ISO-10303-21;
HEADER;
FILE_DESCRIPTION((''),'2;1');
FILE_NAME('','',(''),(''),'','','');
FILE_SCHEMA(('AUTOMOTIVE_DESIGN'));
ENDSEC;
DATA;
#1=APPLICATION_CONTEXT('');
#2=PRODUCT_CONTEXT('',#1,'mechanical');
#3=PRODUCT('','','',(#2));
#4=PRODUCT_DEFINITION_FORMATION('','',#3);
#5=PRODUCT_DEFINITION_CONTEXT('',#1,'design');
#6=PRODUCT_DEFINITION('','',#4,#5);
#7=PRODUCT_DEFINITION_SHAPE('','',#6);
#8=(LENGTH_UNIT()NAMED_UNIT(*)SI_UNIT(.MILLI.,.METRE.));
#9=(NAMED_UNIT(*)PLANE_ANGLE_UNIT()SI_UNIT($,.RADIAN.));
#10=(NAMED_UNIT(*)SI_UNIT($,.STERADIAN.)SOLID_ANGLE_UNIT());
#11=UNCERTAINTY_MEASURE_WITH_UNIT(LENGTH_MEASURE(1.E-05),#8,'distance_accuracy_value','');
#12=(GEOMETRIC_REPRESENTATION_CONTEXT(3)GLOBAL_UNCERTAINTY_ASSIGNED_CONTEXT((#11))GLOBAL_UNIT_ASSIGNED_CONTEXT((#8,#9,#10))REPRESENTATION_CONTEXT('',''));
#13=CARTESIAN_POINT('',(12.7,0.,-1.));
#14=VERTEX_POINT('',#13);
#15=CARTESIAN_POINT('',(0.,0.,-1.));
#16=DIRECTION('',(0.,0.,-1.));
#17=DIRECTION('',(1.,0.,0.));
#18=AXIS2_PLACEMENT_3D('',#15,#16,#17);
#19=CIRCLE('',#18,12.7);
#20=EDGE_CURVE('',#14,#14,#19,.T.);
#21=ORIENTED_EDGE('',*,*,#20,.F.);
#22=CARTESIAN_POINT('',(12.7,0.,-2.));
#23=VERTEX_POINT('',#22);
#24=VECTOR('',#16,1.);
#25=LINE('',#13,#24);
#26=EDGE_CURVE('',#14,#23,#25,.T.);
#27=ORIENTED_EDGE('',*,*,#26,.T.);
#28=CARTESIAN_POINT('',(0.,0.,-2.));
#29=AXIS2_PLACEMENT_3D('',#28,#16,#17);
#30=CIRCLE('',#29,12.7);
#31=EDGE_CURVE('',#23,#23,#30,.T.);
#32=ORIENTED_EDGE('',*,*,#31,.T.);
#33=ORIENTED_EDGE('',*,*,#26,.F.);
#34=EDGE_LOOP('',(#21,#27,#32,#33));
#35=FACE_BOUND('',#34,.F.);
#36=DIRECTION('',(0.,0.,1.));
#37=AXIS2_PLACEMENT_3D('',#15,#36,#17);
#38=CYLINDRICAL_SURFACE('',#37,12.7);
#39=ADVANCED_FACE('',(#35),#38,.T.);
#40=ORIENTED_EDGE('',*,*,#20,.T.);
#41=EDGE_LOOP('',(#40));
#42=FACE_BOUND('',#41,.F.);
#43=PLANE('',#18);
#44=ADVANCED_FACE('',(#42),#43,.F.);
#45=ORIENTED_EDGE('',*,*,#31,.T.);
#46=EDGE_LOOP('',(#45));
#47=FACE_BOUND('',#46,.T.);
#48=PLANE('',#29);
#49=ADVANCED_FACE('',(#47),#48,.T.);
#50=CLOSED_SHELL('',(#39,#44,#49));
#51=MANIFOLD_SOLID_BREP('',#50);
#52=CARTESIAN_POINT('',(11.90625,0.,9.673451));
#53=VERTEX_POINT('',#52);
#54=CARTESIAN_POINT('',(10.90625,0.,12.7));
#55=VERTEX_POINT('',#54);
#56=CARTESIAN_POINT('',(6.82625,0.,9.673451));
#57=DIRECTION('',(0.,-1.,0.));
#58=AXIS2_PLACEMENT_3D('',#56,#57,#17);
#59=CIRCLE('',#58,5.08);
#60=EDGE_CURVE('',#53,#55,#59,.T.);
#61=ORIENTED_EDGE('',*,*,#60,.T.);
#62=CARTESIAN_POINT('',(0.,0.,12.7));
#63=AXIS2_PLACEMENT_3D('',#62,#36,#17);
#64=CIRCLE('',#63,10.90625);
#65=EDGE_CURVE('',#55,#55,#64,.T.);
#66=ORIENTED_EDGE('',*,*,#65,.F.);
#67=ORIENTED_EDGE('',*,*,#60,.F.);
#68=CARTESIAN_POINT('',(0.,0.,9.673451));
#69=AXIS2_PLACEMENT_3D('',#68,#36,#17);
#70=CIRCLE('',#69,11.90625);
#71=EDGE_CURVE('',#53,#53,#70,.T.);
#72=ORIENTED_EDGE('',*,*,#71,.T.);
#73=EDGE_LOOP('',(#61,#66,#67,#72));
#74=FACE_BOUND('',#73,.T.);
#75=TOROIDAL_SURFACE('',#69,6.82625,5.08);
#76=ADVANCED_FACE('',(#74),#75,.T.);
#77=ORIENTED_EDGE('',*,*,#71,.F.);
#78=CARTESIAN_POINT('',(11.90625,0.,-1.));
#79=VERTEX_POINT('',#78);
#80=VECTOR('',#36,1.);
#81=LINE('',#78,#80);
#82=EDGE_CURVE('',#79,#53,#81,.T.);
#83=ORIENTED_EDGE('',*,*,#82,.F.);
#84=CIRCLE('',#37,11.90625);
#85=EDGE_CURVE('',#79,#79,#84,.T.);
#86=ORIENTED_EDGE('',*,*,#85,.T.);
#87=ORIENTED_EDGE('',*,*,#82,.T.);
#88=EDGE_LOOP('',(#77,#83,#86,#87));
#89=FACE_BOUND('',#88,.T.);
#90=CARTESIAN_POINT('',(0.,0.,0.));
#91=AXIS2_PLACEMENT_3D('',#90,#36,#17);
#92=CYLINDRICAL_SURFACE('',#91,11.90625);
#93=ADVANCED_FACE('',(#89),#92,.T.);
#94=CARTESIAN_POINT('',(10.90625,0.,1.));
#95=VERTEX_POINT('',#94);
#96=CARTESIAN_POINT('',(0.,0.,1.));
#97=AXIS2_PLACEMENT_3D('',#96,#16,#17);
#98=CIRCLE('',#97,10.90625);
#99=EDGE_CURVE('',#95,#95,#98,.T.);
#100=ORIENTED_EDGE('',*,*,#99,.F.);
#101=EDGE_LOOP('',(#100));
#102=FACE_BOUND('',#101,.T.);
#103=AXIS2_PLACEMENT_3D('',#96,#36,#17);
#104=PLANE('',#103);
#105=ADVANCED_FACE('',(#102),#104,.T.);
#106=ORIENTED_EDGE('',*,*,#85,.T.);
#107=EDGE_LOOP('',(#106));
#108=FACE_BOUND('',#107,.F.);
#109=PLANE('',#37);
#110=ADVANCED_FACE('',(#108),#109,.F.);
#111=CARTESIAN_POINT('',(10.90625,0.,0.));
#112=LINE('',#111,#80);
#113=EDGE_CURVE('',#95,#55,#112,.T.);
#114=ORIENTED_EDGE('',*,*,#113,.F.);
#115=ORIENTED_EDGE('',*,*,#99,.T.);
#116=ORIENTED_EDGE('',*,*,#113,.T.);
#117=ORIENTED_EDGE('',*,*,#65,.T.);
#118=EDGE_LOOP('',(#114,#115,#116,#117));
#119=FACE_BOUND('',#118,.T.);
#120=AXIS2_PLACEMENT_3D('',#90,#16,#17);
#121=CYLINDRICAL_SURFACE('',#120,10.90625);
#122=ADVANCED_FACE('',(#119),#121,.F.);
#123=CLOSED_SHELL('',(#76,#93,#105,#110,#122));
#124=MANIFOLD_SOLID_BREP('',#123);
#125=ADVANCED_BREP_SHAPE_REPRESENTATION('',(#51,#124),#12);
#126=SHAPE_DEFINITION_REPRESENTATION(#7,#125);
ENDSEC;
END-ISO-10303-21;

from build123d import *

# Parameters (mm, degrees)
F0_R     = 11.90625
F1_DEPTH = 12.7
F2_T     = -1
F3_DEPTH = 1
F4_R     = 12.7
F4_R_2   = 11.90625
F5_DEPTH = 1


# Not quite as in the source:
# - a fillet or chamfer that OpenCascade refuses, or shapes differently, is made with other operations: its cross-section is extruded or revolved along the edge and cut away or added


with BuildPart() as f1:
    # F0 (on Top) → F1 (new body)
    with BuildSketch(Plane.XY):
        Circle(F0_R)
    extrude(amount=F1_DEPTH)

    # F2
    f2_openings = [f1.faces().sort_by_distance(p)[0] for p in [
        (0, 0, 12.7),
    ]]
    offset(amount=F2_T, openings=f2_openings)

    # F3 (add): a face of the model
    f3_faces = [f1.faces().sort_by_distance(p)[0] for p in [
        (0, 0, 0),
    ]]
    extrude(f3_faces, amount=F3_DEPTH)

    # F6: fillet of radius 5.08 on 1 edges, made by hand

    # F6_s1 → F6_t2 (revolve, cut)
    with BuildSketch(Plane.XZ):
        with BuildLine():
            ThreePointArc((11.90625, 9.6734508099), (11.6497756815, 11.267188555), (10.90625, 12.7))
            Line((10.90625, 12.7), (11.90625, 12.7))
            Line((11.90625, 12.7), (11.90625, 9.6734508099))
        make_face()
    revolve(axis=Axis((0, 0, 12.7), (0, 0, 1)), mode=Mode.SUBTRACT)


with BuildPart() as f5:
    # F4 (on face) → F5 (new body)
    with BuildSketch(Plane(origin=(0, 0, -1), x_dir=(1, 0, 0), z_dir=(0, 0, -1))):
        Circle(F4_R)
        Circle(F4_R_2, mode=Mode.SUBTRACT)
        Circle(F4_R_2)
    extrude(amount=F5_DEPTH)


solid = Compound([f1.part, f5.part])
